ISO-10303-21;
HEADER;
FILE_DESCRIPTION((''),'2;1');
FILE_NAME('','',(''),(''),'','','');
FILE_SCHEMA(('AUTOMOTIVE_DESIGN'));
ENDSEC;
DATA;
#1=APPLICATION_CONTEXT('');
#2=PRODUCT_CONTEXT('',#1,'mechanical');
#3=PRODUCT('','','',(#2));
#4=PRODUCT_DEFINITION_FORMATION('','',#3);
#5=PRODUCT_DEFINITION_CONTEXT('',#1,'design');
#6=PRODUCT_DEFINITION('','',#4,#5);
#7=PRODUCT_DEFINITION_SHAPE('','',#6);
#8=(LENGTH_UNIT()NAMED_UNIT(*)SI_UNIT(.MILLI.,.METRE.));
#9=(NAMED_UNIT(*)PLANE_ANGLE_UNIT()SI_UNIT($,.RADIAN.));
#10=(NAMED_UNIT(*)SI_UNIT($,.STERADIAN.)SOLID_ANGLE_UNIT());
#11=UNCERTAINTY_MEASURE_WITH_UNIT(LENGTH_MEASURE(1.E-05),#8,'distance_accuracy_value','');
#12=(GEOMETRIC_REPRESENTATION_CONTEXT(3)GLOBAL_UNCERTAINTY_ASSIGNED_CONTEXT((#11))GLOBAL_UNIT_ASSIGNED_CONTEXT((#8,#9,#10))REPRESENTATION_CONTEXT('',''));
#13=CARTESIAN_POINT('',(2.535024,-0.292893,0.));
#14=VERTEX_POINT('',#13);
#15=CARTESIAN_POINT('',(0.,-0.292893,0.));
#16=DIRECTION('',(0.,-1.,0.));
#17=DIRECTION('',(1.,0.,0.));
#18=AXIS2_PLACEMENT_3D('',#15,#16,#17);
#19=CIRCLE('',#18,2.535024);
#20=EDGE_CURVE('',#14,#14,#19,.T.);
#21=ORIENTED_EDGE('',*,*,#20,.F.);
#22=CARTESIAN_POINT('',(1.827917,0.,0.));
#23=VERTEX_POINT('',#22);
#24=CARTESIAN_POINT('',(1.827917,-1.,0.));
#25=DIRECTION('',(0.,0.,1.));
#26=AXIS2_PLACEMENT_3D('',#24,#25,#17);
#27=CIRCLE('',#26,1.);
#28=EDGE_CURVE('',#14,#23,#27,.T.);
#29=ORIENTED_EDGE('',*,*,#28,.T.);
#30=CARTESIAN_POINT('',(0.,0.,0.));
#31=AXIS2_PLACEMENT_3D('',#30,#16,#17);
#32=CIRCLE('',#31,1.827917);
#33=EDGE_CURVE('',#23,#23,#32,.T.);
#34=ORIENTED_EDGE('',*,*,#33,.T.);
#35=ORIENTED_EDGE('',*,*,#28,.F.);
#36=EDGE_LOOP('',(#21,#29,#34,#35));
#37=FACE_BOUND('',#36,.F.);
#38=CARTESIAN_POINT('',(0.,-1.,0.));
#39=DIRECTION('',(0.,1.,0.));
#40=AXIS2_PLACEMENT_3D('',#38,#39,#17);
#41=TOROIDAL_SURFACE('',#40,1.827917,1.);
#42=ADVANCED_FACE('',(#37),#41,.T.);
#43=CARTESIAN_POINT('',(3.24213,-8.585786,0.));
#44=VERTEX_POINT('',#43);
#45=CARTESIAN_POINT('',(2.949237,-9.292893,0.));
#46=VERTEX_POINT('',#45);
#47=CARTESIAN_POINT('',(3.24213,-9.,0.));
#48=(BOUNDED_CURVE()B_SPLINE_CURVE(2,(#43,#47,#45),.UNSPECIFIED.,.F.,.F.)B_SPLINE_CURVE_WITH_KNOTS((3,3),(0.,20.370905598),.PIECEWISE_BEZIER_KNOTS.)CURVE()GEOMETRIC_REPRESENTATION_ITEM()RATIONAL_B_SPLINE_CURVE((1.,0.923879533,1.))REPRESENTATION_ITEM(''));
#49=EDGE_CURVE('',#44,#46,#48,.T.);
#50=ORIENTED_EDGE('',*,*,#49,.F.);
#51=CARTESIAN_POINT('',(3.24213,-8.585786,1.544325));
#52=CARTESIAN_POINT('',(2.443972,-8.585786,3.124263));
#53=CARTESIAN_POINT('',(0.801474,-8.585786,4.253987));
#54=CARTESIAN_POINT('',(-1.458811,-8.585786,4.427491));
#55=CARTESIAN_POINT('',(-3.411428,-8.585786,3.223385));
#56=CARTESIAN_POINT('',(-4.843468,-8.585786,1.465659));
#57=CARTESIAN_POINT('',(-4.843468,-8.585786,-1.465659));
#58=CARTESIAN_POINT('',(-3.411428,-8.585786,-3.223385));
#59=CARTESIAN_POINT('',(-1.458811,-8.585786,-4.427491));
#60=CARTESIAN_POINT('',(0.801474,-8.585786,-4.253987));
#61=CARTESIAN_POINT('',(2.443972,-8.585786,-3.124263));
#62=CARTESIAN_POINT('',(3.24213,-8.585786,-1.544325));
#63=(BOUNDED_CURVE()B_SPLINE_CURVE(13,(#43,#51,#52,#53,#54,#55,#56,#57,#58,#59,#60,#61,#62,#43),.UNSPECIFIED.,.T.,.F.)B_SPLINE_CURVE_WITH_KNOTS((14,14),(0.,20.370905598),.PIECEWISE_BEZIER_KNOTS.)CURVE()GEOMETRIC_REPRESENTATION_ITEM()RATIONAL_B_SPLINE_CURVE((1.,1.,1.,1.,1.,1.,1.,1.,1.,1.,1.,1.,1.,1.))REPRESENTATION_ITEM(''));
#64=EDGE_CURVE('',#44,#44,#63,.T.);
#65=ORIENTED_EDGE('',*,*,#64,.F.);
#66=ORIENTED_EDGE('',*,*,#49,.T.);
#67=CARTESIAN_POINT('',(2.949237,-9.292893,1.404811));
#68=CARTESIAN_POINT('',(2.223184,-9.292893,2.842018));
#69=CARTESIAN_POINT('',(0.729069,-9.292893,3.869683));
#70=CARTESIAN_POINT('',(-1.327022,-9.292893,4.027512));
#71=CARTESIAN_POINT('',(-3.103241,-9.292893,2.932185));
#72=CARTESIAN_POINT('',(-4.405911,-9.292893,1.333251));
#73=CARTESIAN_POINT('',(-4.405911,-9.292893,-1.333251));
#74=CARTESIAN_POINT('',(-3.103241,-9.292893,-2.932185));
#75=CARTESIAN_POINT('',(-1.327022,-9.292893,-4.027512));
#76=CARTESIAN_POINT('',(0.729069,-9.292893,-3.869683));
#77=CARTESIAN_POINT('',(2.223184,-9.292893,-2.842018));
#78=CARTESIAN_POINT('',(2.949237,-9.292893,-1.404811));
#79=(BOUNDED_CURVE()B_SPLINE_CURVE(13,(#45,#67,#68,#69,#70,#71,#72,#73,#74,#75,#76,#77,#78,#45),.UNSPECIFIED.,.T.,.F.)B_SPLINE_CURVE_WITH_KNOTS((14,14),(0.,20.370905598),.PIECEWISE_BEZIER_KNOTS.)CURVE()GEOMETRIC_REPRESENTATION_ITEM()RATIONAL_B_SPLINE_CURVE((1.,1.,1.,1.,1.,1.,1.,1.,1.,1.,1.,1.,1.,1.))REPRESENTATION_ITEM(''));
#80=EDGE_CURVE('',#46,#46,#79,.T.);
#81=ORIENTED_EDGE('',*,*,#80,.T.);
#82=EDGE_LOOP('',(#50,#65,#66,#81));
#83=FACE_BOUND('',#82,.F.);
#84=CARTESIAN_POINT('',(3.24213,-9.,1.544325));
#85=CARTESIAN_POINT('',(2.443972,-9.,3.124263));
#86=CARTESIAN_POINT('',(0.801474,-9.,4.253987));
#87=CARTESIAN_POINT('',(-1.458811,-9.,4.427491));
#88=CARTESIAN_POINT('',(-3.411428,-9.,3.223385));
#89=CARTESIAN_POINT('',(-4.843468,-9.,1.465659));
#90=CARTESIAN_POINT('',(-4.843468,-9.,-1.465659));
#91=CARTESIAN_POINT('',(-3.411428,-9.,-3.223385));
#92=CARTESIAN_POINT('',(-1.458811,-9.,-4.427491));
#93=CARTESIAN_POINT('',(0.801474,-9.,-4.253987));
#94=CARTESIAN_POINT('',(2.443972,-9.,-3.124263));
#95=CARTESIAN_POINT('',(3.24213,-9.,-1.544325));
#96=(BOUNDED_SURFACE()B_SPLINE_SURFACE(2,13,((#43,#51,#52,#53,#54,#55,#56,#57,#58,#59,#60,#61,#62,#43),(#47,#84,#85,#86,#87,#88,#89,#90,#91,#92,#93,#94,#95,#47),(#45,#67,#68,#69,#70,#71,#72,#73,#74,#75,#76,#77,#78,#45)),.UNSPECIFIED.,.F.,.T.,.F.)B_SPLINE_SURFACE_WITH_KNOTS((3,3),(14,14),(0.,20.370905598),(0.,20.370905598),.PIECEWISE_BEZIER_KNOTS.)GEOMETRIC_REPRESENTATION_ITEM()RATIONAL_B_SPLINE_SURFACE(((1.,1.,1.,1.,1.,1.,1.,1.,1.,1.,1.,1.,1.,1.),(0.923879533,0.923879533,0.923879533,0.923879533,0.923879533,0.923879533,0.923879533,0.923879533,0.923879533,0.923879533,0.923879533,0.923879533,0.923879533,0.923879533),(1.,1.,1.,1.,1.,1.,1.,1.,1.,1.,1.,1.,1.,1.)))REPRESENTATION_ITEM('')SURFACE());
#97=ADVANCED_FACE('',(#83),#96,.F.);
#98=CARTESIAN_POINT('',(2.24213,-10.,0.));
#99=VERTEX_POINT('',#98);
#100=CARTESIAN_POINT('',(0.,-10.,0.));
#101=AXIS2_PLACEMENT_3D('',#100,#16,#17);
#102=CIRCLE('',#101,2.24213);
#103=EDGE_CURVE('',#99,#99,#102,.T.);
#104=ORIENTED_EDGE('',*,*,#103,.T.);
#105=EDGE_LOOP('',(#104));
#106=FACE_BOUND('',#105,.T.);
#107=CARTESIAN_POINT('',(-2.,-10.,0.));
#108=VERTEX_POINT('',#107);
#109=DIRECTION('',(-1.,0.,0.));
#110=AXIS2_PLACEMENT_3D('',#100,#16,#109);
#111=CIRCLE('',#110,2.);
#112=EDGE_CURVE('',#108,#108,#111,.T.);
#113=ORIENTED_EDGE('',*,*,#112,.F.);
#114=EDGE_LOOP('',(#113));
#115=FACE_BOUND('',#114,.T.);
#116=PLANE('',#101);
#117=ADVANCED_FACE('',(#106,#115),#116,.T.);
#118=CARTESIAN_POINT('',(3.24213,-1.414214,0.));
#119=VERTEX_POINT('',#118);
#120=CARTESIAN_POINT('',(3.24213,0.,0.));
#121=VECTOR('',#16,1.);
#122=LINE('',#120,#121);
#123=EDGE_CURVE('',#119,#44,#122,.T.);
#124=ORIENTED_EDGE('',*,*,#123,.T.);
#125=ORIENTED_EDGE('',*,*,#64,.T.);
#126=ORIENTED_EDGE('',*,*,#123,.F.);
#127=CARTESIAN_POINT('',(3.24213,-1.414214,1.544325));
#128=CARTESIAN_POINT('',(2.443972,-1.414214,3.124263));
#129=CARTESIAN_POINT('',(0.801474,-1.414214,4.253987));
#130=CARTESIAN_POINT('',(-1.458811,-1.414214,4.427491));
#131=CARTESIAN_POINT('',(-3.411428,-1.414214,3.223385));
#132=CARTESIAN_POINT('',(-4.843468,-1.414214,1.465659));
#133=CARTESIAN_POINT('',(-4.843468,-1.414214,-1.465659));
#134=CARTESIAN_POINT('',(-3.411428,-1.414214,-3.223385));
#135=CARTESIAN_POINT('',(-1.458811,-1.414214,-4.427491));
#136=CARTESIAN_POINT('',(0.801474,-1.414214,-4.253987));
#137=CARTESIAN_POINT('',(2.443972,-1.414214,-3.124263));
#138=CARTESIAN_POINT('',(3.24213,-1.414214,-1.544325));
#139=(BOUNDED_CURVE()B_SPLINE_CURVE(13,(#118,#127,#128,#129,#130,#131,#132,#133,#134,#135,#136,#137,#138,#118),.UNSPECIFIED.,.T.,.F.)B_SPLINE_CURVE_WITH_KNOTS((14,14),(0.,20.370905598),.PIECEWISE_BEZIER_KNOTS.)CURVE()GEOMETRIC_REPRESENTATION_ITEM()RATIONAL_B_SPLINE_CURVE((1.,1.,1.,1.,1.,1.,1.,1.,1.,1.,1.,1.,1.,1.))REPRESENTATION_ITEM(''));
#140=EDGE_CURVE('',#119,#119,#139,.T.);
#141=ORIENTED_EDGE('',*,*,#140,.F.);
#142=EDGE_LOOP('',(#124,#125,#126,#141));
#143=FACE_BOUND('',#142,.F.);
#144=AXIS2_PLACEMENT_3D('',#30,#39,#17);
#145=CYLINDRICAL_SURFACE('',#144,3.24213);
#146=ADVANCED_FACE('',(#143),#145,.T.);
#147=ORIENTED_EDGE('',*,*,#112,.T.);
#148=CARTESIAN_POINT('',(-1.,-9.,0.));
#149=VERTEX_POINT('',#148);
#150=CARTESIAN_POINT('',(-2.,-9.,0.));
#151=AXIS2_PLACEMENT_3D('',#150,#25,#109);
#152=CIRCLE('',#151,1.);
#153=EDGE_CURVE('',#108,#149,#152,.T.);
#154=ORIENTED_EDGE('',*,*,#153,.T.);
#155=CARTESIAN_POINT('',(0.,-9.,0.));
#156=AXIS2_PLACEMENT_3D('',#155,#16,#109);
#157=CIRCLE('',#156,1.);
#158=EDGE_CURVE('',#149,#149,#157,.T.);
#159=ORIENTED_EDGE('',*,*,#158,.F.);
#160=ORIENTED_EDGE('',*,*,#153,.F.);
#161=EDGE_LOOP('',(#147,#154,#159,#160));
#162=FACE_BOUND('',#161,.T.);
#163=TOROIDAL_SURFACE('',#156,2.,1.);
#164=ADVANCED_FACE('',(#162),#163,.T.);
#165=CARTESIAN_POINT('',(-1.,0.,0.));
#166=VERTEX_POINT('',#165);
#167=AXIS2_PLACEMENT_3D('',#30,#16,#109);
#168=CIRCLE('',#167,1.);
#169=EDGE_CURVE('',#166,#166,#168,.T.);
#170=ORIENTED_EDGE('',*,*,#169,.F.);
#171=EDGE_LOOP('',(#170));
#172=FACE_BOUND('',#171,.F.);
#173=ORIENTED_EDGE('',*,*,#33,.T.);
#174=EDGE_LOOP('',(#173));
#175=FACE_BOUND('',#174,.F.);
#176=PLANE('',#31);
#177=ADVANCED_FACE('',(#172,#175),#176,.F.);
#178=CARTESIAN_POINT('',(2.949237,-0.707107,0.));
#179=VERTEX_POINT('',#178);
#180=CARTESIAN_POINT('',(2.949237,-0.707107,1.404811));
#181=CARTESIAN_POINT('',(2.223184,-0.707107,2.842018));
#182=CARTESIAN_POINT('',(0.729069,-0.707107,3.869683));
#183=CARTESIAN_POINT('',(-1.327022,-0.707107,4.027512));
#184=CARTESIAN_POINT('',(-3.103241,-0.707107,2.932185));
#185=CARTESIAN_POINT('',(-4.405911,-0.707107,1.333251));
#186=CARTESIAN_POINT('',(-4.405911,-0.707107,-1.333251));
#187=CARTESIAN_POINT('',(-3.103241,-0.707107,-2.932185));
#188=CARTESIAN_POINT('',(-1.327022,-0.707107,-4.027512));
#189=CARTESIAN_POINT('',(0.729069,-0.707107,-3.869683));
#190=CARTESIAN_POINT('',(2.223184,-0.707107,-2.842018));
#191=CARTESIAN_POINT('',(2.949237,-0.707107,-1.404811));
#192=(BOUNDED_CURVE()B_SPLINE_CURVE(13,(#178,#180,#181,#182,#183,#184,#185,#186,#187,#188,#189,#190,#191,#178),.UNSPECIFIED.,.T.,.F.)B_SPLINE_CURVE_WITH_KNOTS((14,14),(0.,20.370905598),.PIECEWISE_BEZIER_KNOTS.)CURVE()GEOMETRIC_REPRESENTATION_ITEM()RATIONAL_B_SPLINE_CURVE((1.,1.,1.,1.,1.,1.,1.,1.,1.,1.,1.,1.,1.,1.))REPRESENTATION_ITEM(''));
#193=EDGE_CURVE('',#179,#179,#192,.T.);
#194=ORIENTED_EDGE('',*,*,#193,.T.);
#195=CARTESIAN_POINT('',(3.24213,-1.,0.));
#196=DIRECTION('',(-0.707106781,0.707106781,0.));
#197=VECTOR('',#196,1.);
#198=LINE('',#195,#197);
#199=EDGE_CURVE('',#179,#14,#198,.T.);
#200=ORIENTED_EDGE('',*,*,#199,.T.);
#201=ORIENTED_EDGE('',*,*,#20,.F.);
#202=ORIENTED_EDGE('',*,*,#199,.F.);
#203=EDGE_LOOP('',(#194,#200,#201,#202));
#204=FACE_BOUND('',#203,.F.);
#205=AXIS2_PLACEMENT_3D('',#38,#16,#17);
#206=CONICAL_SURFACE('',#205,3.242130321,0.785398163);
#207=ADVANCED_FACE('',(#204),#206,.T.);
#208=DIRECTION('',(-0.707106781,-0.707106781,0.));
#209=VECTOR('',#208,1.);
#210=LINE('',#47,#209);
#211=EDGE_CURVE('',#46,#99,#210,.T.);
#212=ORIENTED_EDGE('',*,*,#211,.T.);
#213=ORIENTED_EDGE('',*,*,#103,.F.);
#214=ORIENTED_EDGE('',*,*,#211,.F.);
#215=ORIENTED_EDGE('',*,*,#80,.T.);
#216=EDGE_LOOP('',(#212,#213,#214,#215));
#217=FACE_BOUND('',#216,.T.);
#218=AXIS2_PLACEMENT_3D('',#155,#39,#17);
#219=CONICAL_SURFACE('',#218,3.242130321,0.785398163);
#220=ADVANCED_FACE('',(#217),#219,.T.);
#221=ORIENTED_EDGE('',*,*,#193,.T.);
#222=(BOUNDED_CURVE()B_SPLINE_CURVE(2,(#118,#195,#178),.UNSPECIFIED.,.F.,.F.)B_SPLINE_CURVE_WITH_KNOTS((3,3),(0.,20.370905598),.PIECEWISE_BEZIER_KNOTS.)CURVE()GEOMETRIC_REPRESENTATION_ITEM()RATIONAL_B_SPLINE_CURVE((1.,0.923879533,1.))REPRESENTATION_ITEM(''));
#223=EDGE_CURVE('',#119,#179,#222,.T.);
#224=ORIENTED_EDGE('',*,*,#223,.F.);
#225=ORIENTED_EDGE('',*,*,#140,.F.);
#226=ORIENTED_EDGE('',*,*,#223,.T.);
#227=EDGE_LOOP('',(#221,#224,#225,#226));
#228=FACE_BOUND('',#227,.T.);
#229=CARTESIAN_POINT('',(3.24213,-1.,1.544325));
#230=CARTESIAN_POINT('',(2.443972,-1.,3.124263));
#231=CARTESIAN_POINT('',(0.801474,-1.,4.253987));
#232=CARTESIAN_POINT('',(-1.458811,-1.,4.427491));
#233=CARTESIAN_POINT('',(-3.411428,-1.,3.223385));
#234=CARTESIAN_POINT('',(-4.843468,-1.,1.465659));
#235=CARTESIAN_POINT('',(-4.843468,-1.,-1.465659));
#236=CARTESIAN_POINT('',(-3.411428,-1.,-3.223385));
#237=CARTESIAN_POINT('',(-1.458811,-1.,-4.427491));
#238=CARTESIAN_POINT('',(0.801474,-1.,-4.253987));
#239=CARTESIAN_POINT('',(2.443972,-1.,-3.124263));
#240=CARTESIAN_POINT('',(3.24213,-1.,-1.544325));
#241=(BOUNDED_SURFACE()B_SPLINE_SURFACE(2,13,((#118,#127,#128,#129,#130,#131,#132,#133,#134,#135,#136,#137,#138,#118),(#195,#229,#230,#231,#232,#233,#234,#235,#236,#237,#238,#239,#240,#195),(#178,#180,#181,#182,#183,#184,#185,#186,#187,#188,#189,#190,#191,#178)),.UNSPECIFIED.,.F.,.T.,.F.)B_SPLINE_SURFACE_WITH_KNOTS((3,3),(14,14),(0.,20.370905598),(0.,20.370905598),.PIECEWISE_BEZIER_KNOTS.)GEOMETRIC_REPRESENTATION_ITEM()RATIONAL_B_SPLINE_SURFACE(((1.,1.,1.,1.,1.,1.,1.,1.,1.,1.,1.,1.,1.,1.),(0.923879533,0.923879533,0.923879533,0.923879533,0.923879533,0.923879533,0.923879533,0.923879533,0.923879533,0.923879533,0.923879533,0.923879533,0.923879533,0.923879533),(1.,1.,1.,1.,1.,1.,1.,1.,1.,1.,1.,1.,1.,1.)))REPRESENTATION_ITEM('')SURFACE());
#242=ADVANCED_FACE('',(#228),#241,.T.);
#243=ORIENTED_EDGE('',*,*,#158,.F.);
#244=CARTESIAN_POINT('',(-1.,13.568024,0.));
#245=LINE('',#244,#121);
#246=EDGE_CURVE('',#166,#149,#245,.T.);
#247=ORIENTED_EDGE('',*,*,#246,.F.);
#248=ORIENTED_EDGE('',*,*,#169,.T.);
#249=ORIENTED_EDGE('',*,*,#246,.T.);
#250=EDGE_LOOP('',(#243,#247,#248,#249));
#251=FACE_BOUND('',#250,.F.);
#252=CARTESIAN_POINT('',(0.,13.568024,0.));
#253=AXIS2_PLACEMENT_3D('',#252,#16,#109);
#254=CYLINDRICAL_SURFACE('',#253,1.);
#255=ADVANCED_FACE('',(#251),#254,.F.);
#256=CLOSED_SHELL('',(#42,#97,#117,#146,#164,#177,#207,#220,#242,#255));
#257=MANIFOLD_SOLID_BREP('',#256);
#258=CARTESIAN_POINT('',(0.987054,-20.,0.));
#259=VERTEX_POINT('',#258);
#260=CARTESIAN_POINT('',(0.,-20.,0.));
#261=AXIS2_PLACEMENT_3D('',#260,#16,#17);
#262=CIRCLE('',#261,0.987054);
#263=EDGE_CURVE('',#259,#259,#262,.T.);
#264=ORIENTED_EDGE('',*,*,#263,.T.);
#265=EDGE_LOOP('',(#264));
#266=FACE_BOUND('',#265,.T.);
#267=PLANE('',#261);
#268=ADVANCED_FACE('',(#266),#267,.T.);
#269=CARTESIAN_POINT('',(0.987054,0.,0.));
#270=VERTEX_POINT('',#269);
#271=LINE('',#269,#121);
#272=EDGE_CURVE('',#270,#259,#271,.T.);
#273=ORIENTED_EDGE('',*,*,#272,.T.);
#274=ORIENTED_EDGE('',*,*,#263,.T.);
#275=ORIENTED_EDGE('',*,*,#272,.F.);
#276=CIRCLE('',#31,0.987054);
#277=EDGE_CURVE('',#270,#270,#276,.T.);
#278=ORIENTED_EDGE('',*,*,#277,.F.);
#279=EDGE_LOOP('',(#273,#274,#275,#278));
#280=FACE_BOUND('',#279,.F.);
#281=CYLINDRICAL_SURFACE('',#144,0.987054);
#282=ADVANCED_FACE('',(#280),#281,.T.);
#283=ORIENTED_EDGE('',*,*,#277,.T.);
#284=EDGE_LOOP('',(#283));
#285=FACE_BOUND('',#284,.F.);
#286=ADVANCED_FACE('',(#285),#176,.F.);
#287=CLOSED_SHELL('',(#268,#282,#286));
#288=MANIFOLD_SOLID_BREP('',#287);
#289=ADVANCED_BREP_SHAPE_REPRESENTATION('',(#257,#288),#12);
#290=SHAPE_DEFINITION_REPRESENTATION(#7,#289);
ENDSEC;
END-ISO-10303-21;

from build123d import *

# Parameters (mm, degrees)
F0_R     = 3.2421303212
F1_DEPTH = 10
F2_SIZE  = 1
F4_D     = 2
F5_R     = 1
F6_R     = 0.9870539352
F7_DEPTH = 20


with BuildPart() as f1:
    # F0 (on Front) → F1 (new body)
    with BuildSketch(Plane.XZ):
        Circle(F0_R)
    extrude(amount=F1_DEPTH)

    # F2
    f2_edges = [f1.edges().sort_by_distance(p)[0] for p in [
        (3.24213, -5, 0),
        (-3.24213, 0, 0),
        (-3.24213, -10, 0),
    ]]
    chamfer(f2_edges, length=F2_SIZE)

    # F4 (through all)
    with Locations(Plane(origin=(0, 0, 0), x_dir=(1, 0, 0), z_dir=(0, 1, 0))):
        with Locations((0, 0)):
            Hole(F4_D / 2)

    # F5
    f5_edges = [f1.edges().sort_by_distance(p)[0] for p in [
        (-3.24213, -9, 0),
        (-3.24213, -1, 0),
        (2.74213, -0.5, 0),
        (-2.24213, 0, 0),
        (-1, -10, 0),
    ]]
    fillet(f5_edges, radius=F5_R)


with BuildPart() as f7:
    # F6 (on Front) → F7 (new body)
    with BuildSketch(Plane.XZ):
        Circle(F6_R)
    extrude(amount=F7_DEPTH)


solid = Compound([f1.part, f7.part])
